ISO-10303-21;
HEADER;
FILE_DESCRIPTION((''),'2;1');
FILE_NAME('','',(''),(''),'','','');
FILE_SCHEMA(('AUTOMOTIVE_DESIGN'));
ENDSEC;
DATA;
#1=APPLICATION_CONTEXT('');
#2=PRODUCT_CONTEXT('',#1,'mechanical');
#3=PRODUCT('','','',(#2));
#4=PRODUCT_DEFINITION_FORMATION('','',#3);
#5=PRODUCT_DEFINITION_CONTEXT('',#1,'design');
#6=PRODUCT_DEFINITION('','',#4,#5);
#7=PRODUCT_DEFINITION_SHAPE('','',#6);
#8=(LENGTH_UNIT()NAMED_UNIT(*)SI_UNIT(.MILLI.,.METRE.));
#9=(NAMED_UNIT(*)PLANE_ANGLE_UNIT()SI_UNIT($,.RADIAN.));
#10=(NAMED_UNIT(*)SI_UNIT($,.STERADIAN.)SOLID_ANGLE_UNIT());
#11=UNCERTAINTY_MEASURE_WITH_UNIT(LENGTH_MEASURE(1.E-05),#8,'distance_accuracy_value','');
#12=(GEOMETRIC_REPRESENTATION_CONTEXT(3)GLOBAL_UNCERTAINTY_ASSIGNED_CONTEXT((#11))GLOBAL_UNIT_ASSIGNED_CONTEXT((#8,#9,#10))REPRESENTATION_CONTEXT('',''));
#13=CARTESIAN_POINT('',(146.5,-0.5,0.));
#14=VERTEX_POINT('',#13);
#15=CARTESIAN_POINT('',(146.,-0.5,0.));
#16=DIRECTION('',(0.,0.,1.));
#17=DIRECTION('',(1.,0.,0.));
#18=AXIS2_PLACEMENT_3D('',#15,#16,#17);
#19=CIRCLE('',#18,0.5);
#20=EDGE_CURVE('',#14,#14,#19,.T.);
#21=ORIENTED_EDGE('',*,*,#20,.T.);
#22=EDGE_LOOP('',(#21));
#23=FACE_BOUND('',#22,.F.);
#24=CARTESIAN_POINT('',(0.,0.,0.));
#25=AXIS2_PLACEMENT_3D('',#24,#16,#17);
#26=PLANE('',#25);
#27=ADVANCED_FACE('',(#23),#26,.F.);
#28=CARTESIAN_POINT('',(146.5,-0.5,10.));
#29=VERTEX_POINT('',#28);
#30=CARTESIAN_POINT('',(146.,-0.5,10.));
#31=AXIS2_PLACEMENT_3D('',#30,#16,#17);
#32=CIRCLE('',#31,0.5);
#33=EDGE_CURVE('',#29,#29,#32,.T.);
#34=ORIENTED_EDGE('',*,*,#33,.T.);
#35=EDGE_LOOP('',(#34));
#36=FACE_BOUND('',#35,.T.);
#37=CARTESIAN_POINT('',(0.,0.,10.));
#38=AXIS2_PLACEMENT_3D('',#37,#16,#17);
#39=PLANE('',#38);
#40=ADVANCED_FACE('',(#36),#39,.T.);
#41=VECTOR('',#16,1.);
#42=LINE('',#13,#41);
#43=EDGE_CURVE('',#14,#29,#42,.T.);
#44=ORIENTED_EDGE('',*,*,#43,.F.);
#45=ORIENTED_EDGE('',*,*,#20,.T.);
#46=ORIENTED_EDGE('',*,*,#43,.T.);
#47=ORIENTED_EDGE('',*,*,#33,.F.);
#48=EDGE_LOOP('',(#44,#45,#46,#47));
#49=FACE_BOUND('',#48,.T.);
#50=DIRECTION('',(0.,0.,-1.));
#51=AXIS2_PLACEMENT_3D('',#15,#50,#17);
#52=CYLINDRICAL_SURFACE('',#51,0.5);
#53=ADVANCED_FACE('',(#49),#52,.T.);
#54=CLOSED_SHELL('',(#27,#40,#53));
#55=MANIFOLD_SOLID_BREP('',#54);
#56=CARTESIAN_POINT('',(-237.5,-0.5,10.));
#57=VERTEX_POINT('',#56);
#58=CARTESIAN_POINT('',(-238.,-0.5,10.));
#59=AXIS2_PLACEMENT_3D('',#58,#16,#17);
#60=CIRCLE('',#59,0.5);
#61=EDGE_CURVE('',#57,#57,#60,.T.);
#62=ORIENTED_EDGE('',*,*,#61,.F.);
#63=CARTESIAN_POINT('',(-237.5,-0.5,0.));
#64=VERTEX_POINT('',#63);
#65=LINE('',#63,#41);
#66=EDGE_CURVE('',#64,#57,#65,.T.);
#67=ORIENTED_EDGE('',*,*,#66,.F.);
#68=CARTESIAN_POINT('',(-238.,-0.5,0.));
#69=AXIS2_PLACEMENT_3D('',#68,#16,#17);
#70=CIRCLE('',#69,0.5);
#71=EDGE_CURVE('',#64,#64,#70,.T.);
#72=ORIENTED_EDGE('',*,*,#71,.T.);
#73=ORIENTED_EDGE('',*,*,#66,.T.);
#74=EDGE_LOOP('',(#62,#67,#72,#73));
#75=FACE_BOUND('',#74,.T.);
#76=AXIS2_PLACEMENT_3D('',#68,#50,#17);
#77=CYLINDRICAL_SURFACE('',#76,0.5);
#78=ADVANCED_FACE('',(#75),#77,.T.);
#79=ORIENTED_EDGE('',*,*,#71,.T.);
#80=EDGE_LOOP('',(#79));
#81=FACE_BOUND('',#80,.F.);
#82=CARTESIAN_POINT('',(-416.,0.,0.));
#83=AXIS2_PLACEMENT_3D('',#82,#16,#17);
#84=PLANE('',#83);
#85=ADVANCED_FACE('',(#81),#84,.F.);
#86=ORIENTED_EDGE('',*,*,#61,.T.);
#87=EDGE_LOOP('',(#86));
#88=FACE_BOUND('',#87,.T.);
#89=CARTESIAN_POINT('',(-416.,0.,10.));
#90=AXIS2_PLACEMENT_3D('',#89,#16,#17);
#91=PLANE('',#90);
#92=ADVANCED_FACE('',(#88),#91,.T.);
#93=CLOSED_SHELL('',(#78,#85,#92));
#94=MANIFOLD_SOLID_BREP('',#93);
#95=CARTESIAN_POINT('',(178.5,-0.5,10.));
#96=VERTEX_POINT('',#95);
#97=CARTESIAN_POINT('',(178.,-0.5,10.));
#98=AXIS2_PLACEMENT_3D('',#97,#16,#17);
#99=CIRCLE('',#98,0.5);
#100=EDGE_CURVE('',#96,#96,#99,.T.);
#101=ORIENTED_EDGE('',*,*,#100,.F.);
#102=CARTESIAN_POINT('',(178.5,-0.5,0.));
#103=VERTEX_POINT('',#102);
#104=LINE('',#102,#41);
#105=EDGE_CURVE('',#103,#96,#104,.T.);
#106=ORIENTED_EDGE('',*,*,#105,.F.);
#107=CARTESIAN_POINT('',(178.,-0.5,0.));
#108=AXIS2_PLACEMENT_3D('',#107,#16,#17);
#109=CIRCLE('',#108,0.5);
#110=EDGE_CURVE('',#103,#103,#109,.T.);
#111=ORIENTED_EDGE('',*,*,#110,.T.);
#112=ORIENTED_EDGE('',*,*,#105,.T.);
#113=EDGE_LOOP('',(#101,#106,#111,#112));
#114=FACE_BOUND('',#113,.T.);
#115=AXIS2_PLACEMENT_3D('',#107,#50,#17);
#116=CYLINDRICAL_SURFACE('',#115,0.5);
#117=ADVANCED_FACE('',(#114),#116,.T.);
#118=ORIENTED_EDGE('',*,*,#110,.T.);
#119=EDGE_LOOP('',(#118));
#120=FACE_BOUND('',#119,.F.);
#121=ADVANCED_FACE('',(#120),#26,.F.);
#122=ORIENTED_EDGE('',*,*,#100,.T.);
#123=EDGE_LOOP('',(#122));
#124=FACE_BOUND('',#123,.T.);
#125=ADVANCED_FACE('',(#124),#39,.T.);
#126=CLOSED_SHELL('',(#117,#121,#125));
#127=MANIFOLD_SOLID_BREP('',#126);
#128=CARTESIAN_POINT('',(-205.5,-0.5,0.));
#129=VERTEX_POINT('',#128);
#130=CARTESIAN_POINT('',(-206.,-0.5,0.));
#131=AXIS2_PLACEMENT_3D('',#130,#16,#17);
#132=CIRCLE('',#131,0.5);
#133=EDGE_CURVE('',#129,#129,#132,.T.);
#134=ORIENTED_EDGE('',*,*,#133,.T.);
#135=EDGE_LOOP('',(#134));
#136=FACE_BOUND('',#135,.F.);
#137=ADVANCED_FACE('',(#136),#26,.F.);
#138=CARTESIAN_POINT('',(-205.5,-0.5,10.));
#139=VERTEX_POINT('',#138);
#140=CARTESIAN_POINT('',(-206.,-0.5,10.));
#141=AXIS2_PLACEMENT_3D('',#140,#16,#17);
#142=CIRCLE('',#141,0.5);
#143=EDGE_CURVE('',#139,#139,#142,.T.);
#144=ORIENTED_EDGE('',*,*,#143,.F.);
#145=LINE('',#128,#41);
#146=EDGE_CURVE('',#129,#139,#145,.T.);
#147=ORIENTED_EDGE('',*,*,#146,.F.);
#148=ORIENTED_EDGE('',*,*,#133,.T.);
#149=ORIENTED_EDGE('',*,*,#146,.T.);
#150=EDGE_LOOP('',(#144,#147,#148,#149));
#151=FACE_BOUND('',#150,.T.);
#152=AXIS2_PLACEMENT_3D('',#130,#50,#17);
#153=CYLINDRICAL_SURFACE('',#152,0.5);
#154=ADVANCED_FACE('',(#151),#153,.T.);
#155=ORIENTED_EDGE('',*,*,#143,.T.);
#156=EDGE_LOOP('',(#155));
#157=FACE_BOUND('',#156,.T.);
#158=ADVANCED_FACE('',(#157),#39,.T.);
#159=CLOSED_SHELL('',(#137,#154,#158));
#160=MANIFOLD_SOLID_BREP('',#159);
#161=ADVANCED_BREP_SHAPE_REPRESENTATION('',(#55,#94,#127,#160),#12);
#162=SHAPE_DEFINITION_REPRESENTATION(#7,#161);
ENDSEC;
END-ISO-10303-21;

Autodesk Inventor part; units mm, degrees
ref_plane "YZ Plane" through (0, 0, 0) normal (1, 0, 0) x (0, 1, 0)
ref_plane "XZ Plane" through (0, 0, 0) normal (0, 1, 0) x (-1, 0, 0)
ref_plane "XY Plane" through (0, 0, 0) normal (0, 0, 1) x (1, 0, 0)
sketch "Sketch1" plane through (0, 0, 0) normal (0, 0, 1) x (1, 0, 0)
  line L0 (-300, -9) -> (300, -9)
  line L1 (300, -9) -> (300, 9)
  line L2 (300, 9) -> (-300, 9)
  line L3 (-300, 9) -> (-300, -9)
  line L4 (-300, -9) -> (300, 9) construction
  line L5 (300, -9) -> (-300, 9) construction
  point P0 (0, 0)
  dimension "d0" = 600
  dimension "d1" = 18
sketch "Sketch2" plane through (0, 0, 0) normal (0, 0, 1) x (1, 0, 0)
  circle A0 centre (178, -0.5) radius 0.5
  line L0 (300, 9) -> (-300, 9) projected
  line L1 (-300, -9) -> (300, -9) projected
  line L2 (0, -12.6) -> (0, 12.6) projected
  line L3 (300, -9) -> (300, 9) projected
  point P0 (0, 0)
  dimension "d3" = 9.5
  dimension "d4" = 1
  dimension "d26" = 122
extrude "Extrusion1" add sketch "Sketch2" along normal blind 10 contours A0
pattern_linear "Minifix Array" count 2 spacing 416 along (-1, 0, 0) of "Extrusion1"
sketch "Sketch3" plane through (0, 0, 0) normal (0, 0, 1) x (1, 0, 0)
  circle A0 centre (146, -0.5) radius 0.5
  circle A1 centre (178, -0.5) radius 0.5 projected
  point P0 (0, 0)
  dimension "d11" = 32
extrude "Extrusion2" add sketch "Sketch3" along normal blind 10 separate body contours A0
pattern_of_one "Left Dowel Array" bodies 2
sketch "Sketch4" plane through (0, 0, 0) normal (0, 0, 1) x (1, 0, 0)
  line L0 (-300, 9) -> (-300, -9) projected
  circle A0 centre (-206, -0.5) radius 0.5
  circle A1 centre (178, -0.5) radius 0.5 projected
  line L1 (300, -9) -> (300, 9) projected
  point P0 (0, 0)
  dimension "d17" = 122
  dimension "d28" = 506
extrude "Extrusion3" add sketch "Sketch4" along normal blind 10 separate body contours A0
pattern_of_one "Right Dowel Array" bodies 3
equation "\"d3\" = Y_Coord"
equation "\"d26\" = X_Coord"
equation "\"d9\" = Step"
equation "\"d16\" = Step"
equation "\"d28\" = PlacingWithByStep + X_Coord - PlacingStep"
equation "\"d23\" = Step"
equation "\"d0\" = ContactPatchWidth"
equation "\"d1\" = ContactPatchHeight"
equation "\"ContactPatchWidth\" = 600"
equation "\"ContactPatchHeight\" = 18"
equation "\"PlacingStep\" = 32"
equation "\"PlacingWithByStep\" = 416"
equation "\"X_Coord\" = 122"
equation "\"Step\" = 416"
equation "\"Y_Coord\" = 9.5"
equation "\"MaxDistBetweenByStep\" = 192"
properties part number "Minifix&Dowel Joint 11100"
